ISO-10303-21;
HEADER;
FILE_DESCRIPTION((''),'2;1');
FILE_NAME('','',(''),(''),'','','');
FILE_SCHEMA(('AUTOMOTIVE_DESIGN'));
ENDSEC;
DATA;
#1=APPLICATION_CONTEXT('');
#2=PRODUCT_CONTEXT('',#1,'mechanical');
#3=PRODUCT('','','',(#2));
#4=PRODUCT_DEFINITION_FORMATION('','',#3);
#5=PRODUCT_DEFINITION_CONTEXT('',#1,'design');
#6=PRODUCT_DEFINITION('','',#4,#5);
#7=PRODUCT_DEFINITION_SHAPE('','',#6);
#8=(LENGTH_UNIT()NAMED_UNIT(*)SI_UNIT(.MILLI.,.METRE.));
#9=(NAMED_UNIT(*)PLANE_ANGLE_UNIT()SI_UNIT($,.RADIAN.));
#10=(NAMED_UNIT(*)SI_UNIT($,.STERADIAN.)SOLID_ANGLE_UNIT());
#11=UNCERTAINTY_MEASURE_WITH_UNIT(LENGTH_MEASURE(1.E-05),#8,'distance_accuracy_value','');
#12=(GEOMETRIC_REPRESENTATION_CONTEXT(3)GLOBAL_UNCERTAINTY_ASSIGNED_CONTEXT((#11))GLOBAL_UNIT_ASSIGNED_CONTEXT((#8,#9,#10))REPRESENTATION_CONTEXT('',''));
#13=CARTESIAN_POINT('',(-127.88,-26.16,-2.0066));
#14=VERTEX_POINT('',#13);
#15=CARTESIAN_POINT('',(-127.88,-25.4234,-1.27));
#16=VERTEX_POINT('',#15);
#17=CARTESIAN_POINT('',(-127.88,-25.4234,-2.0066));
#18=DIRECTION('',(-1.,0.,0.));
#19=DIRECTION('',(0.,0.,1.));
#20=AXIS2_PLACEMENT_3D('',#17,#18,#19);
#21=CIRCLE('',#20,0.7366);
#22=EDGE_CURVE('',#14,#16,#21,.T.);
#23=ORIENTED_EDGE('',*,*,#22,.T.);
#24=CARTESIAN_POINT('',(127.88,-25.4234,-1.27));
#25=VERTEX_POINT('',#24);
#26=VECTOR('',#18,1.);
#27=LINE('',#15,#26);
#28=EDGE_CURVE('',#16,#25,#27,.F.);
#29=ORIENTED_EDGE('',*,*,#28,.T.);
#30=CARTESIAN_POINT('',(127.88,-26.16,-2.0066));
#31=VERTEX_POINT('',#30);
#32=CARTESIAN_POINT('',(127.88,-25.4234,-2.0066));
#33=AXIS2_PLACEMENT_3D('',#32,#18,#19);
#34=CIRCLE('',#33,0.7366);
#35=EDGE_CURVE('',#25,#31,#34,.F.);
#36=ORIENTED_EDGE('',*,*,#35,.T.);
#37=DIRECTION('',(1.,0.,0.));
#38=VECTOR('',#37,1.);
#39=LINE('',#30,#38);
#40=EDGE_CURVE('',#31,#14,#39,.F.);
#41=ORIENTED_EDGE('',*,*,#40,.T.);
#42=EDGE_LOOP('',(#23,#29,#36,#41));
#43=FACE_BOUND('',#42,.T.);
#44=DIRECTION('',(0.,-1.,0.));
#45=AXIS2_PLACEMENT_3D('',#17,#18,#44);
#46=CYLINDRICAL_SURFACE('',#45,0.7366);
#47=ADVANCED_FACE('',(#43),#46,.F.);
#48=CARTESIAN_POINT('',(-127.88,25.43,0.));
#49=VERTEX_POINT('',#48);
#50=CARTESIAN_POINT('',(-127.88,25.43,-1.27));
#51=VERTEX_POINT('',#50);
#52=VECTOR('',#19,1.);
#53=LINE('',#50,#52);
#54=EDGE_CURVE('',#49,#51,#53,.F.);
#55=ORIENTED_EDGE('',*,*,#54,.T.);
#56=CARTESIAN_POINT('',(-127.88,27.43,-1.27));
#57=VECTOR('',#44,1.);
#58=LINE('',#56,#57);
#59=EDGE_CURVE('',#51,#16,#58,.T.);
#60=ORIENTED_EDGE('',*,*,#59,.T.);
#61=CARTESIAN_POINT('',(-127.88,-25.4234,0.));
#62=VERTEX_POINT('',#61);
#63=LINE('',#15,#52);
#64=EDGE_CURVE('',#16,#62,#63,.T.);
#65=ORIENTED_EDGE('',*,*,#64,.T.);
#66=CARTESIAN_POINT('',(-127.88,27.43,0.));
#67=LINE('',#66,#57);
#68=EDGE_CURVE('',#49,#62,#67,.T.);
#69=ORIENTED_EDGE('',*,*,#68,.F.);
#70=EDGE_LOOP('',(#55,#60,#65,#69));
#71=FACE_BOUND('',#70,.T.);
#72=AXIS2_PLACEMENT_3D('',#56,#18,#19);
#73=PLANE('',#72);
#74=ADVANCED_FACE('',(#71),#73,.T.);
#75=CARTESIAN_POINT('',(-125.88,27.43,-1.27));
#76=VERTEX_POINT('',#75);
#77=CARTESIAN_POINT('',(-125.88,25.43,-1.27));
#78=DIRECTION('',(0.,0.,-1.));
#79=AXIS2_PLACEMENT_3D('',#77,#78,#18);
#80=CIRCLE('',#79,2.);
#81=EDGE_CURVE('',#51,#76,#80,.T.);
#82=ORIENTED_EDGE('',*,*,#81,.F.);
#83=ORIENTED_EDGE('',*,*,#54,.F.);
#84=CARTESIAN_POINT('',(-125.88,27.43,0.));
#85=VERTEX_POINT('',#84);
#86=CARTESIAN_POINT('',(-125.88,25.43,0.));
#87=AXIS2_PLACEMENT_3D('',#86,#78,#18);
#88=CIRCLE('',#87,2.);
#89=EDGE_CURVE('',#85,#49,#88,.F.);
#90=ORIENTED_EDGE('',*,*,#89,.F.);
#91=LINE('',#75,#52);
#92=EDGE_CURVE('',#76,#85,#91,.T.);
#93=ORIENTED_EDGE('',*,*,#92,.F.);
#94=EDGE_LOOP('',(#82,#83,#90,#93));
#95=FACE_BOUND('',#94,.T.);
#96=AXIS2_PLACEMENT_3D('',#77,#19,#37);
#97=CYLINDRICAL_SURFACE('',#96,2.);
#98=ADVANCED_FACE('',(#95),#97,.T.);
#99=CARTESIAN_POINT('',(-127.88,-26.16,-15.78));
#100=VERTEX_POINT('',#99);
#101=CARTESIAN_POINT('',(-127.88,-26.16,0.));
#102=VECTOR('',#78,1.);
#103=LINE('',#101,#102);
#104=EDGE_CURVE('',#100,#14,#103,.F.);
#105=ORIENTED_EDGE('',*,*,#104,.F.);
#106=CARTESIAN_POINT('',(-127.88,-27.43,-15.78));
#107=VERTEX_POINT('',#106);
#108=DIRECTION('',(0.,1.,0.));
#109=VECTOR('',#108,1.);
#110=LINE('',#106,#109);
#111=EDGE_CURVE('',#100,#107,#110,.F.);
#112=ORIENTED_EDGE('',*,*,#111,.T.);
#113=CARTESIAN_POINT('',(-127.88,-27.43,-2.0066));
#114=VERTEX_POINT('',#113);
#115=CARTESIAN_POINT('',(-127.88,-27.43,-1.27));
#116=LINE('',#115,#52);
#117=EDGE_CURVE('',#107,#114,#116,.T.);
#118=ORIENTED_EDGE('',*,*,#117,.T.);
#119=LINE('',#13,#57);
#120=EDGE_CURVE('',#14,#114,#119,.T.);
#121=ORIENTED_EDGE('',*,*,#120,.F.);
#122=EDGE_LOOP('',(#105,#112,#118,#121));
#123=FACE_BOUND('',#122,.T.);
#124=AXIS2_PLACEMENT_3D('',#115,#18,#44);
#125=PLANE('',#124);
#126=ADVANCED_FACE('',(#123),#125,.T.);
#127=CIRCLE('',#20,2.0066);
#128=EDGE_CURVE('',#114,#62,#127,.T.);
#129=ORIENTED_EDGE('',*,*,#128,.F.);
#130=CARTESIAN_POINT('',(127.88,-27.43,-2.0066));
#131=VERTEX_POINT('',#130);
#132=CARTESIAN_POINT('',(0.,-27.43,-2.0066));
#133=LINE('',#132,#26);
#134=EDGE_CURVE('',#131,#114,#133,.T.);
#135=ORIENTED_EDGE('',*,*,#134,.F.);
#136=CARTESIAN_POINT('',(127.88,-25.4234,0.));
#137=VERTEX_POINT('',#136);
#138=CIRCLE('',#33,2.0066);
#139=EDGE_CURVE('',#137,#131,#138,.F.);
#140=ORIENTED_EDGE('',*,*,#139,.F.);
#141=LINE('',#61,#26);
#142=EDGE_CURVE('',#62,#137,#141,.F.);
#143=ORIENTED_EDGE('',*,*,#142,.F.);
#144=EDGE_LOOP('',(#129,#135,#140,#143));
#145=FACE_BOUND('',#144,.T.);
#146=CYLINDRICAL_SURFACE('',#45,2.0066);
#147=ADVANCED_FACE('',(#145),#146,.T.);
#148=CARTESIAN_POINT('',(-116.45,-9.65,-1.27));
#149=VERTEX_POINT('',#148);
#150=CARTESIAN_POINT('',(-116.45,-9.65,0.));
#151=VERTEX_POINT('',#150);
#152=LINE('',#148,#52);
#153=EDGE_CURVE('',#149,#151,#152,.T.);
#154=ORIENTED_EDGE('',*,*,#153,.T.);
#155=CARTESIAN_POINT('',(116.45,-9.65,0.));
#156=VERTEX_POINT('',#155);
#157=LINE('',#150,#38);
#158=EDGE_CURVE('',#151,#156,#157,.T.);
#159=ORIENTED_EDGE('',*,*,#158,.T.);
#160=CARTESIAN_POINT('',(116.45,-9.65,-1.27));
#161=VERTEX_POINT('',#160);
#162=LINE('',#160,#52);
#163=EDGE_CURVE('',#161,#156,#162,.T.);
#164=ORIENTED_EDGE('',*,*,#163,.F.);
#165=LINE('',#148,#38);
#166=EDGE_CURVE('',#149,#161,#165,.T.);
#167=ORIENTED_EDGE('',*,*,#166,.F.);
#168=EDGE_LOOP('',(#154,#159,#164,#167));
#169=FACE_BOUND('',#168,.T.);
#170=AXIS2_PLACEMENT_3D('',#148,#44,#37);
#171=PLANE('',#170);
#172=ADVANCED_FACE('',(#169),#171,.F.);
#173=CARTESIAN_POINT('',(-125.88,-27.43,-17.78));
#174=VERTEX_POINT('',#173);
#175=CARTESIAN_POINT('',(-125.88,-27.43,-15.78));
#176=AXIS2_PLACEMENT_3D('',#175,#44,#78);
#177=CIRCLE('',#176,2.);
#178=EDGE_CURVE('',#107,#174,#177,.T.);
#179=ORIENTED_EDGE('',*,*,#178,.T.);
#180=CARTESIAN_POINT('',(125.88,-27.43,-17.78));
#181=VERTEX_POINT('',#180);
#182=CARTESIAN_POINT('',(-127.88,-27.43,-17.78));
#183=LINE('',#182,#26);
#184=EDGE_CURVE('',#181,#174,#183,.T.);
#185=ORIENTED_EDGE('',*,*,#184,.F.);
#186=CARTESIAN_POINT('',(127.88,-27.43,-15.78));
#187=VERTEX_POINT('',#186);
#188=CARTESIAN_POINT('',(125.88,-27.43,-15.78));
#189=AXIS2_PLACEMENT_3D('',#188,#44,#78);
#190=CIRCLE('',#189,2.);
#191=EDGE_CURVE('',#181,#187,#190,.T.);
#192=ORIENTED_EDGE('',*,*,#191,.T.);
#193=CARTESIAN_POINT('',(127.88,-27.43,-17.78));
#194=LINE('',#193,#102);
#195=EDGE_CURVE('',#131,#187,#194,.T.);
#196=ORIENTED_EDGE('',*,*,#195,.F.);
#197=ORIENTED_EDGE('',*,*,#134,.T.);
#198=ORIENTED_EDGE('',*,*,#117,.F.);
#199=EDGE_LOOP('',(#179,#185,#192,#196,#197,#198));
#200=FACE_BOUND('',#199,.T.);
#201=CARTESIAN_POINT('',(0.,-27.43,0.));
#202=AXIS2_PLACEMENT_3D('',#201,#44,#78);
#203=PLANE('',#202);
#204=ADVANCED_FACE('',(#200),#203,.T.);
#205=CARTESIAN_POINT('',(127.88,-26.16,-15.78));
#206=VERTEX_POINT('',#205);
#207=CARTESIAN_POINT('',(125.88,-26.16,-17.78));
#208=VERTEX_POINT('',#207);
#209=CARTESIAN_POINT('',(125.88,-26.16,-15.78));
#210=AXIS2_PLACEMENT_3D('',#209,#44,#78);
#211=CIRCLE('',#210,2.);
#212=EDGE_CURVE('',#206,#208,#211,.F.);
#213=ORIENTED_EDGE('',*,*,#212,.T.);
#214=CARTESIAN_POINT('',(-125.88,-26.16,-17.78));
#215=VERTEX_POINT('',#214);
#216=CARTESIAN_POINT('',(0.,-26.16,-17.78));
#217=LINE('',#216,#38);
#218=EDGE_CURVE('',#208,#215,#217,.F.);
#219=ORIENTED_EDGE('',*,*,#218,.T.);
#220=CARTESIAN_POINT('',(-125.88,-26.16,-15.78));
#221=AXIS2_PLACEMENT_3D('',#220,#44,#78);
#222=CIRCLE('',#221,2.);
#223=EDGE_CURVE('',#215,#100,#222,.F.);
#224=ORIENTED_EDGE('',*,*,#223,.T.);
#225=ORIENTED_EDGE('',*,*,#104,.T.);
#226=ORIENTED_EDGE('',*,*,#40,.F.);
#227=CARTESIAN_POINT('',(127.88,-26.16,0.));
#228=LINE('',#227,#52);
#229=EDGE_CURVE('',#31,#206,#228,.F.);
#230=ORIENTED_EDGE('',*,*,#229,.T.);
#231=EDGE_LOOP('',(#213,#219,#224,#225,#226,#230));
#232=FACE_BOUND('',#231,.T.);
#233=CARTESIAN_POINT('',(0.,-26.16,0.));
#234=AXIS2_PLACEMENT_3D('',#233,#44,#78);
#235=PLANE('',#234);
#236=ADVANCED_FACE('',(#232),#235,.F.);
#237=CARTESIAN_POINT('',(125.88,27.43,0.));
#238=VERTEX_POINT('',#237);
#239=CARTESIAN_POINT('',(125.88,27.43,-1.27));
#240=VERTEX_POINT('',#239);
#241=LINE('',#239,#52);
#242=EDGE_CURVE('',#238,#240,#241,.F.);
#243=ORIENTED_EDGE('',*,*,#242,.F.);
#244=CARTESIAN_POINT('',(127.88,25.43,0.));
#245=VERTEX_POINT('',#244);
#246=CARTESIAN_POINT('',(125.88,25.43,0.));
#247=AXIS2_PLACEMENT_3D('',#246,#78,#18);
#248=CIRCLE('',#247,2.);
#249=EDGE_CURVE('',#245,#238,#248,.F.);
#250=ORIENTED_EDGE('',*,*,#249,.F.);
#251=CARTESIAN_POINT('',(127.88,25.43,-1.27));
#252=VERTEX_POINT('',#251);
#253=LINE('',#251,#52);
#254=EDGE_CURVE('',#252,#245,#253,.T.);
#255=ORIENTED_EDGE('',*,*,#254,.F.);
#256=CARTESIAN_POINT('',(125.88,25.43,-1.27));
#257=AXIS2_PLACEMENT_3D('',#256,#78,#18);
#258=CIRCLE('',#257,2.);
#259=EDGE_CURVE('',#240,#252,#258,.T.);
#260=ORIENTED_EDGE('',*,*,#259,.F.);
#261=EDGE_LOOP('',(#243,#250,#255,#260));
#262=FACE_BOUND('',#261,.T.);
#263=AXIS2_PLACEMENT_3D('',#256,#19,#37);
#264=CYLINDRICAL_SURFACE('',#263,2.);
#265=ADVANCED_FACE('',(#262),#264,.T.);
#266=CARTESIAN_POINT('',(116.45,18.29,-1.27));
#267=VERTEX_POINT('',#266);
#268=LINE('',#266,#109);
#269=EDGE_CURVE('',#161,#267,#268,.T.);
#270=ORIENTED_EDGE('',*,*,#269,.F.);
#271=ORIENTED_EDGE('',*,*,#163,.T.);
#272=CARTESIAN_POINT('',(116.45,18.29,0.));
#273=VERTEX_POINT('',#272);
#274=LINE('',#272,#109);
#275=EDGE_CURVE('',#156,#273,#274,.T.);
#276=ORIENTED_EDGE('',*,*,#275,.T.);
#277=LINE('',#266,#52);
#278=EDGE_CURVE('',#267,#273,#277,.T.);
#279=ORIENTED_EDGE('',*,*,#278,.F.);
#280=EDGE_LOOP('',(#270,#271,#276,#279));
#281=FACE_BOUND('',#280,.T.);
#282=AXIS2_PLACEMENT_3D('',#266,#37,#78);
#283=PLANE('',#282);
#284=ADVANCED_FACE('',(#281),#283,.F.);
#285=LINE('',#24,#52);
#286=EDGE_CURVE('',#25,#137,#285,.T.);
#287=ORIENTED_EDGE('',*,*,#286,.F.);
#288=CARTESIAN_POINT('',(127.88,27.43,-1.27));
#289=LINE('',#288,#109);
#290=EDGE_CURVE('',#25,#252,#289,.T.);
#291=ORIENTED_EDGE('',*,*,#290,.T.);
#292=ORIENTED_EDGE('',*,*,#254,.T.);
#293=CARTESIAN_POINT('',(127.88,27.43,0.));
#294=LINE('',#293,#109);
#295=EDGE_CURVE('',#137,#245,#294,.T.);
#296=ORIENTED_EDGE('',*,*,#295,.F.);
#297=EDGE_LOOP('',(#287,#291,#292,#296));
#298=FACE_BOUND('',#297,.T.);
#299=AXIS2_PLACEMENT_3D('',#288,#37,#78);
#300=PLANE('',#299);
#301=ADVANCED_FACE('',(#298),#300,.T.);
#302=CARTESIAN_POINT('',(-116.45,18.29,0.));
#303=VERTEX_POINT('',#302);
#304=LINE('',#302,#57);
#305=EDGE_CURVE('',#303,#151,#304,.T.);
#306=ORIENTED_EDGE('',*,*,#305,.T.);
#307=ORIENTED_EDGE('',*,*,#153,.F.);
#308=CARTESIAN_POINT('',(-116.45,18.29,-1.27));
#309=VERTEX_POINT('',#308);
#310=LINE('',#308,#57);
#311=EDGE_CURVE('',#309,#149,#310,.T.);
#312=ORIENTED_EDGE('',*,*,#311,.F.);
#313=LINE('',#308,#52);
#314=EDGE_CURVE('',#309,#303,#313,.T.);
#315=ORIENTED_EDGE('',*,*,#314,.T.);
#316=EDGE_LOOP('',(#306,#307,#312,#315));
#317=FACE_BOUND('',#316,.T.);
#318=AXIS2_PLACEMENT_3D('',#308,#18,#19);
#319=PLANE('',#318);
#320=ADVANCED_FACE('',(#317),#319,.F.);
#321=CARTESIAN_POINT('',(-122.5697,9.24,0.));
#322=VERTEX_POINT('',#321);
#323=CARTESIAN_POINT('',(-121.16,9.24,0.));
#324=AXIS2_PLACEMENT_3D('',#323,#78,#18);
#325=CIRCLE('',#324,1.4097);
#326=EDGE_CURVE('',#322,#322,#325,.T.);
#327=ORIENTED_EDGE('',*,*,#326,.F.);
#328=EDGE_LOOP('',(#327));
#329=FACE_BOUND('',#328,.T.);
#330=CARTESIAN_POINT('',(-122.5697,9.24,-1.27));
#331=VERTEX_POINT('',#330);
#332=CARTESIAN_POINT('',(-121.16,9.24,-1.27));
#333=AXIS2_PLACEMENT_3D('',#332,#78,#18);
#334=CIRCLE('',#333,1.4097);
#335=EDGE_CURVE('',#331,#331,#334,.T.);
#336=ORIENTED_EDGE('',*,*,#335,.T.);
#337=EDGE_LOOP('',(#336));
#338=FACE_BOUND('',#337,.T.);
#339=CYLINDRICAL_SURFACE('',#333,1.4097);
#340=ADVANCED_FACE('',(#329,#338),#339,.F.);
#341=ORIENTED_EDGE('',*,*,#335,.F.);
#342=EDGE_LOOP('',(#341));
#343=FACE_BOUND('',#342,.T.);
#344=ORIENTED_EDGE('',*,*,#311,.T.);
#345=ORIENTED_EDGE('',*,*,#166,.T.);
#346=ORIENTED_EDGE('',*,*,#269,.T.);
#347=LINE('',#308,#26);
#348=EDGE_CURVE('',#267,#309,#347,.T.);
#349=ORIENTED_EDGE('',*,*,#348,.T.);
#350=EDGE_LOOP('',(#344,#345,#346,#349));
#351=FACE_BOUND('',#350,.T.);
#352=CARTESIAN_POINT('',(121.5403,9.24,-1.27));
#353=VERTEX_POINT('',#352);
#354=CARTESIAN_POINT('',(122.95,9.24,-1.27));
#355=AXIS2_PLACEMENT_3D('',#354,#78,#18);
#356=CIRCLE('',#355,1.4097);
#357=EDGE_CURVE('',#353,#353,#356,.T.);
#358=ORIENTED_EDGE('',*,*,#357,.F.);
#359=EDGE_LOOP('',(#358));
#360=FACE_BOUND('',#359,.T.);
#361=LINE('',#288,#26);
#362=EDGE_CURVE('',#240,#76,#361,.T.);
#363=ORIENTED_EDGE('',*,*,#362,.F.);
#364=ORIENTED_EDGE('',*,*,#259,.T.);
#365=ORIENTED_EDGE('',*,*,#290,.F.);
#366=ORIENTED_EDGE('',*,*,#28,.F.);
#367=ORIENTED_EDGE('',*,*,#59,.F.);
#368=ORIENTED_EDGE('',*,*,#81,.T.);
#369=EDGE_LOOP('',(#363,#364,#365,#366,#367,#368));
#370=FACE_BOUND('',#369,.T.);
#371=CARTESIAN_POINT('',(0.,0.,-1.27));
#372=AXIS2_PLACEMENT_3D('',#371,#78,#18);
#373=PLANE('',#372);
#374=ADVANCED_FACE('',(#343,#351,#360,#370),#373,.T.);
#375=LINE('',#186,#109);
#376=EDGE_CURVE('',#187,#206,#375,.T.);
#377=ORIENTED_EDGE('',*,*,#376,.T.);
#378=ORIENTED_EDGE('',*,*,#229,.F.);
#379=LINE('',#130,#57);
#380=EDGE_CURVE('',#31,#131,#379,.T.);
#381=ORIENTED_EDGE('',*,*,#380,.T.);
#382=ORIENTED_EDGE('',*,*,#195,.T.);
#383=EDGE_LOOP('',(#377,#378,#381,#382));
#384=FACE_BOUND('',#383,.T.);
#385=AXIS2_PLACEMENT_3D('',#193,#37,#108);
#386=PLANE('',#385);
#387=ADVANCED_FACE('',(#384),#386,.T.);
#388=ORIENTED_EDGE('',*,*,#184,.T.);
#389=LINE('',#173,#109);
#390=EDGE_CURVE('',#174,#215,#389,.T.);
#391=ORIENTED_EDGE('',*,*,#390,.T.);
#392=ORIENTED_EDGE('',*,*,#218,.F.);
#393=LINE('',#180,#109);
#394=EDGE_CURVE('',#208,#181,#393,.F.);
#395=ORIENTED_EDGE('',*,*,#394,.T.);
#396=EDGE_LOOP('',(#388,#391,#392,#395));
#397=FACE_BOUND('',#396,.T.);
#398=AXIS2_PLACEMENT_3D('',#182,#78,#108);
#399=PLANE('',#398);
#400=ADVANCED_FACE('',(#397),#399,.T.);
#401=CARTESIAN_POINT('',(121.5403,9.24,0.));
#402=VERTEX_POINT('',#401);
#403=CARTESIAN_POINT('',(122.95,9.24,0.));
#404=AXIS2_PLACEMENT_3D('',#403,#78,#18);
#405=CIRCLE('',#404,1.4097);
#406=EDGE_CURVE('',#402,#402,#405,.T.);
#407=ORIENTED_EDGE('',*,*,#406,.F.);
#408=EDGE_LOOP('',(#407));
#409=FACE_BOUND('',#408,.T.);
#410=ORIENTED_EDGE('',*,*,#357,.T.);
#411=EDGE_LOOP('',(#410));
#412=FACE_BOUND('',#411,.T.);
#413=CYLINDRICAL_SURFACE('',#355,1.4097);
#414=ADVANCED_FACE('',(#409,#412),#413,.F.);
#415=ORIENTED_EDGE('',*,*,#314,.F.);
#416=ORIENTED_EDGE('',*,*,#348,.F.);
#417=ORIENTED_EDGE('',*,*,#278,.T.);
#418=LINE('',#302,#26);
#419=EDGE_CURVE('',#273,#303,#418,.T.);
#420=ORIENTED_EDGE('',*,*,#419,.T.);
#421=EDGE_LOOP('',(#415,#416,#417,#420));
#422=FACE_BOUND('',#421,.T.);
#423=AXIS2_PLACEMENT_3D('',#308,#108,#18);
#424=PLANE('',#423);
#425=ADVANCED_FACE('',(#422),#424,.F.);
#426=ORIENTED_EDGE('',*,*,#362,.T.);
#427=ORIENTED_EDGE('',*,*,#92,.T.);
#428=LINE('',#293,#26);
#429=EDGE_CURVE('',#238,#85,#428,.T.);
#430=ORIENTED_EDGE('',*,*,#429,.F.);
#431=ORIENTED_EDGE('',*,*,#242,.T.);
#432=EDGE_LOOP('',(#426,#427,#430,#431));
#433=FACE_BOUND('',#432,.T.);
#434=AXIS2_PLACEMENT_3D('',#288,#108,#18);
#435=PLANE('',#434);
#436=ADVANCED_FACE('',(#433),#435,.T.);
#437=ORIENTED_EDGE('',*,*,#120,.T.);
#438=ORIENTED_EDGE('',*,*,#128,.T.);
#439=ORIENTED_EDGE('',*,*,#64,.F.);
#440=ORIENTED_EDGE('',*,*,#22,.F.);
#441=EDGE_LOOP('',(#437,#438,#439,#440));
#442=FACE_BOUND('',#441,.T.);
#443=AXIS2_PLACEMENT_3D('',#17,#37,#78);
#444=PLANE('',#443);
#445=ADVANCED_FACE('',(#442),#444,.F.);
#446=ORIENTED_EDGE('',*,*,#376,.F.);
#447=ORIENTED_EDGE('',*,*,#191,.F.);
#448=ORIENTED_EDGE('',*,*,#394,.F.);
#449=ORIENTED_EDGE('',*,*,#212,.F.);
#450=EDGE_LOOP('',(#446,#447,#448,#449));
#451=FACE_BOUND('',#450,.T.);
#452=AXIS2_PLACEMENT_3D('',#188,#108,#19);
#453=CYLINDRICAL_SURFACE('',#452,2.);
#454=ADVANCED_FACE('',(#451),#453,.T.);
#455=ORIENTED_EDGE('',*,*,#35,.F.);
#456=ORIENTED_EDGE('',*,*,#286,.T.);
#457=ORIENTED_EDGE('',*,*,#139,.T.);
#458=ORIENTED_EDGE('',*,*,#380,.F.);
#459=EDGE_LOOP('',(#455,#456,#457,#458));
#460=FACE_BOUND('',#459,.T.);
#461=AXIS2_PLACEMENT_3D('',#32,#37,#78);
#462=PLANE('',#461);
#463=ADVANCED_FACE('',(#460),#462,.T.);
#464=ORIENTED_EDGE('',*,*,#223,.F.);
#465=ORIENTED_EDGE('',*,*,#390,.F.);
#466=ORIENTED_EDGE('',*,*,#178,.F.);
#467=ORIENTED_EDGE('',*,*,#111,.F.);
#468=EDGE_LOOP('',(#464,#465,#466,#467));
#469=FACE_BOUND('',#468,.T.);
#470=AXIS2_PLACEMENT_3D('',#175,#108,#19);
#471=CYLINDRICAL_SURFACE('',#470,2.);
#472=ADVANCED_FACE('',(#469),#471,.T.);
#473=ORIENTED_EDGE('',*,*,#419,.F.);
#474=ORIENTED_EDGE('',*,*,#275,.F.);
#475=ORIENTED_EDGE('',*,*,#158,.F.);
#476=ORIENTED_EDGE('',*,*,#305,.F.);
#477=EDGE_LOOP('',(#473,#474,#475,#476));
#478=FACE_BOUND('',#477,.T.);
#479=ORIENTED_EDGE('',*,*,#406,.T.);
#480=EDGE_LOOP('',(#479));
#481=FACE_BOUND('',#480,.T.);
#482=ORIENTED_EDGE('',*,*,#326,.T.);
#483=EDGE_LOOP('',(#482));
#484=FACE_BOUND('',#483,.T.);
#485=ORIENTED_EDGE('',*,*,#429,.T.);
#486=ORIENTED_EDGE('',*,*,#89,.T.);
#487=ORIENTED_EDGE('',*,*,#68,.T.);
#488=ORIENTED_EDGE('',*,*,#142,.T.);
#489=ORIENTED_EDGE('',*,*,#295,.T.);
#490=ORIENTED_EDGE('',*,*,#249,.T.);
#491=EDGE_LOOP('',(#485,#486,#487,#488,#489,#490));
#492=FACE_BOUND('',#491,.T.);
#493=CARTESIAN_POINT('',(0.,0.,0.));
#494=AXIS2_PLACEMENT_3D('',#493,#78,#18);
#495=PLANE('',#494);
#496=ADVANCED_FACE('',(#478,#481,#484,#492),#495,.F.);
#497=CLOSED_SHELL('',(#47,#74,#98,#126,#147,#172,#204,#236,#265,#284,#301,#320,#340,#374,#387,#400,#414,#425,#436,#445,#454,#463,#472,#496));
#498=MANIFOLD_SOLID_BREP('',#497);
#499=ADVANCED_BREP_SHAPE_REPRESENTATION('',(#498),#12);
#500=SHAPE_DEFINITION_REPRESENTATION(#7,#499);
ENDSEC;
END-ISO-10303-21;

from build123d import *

# Parameters (mm, degrees)
SKETCH2_W                    = 255.76
SKETCH2_H                    = 54.86
SKETCH2_W_2                  = 232.9
SKETCH2_H_2                  = 27.94
BASE_FLANGE1_DEPTH           = 1.27
EDGE_FLANGE1_STRIP_W         = 6.5532
EDGE_FLANGE1_STRIP_H         = 1.27
EDGE_FLANGE1_STRIP_CUT_DEPTH = 255.76
EDGE_FLANGE1_DEPTH           = 255.76
F_34_0_111_DIAMETER_HOLE1_D  = 2.8194
FILLET1_R                    = 2


# Sheet-metal steps are written as plain solids
with BuildPart() as part:
    # Sketch2 → Base-Flange1 (new body)
    with BuildSketch(Plane.XY):
        Rectangle(SKETCH2_W, SKETCH2_H)
        with Locations((0, 4.32)):
            Rectangle(SKETCH2_W_2, SKETCH2_H_2, mode=Mode.SUBTRACT)
    extrude(amount=-BASE_FLANGE1_DEPTH)

    # Edge-Flange1 strip (across the edge) → Edge-Flange1 strip cut (cut)
    with BuildSketch(Plane(origin=(127.88, -27.43, -1.27), x_dir=(0, 1, 0), z_dir=(-1, 0, 0))):
        with Locations((-1.27, -0.635)):
            Rectangle(EDGE_FLANGE1_STRIP_W, EDGE_FLANGE1_STRIP_H)
    extrude(amount=EDGE_FLANGE1_STRIP_CUT_DEPTH, mode=Mode.SUBTRACT)

    # Edge-Flange1 section (across the edge) → Edge-Flange1 (add)
    with BuildSketch(Plane(origin=(127.88, -27.43, -1.27), x_dir=(0, 1, 0), z_dir=(-1, 0, 0))):
        with BuildLine():
            Line((0, 0.7366), (0, 16.51))
            Line((0, 16.51), (1.27, 16.51))
            Line((1.27, 16.51), (1.27, 0.7366))
            ThreePointArc((1.27, 0.7366), (1.485745145, 0.215745145), (2.0066, 0))
            Line((2.0066, 0), (2.0066, -1.27))
            ThreePointArc((2.0066, -1.27), (0.587719533, -0.682280467), (0, 0.7366))
        make_face()
    extrude(amount=EDGE_FLANGE1_DEPTH)

    # #34 (0.111) Diameter Hole1 (through all)
    with Locations(Plane(origin=(0, 0, -1.27), x_dir=(-1, 0, 0), z_dir=(0, 0, -1))):
        with Locations((-122.95, 9.24), (121.16, 9.24)):
            Hole(F_34_0_111_DIAMETER_HOLE1_D / 2)

    # Fillet1
    fillet1_edges = [part.edges().sort_by_distance(p)[0] for p in [
        (127.88, -26.795, -17.78),
        (-127.88, -26.795, -17.78),
        (-127.88, 27.43, -0.635),
        (127.88, 27.43, -0.635),
    ]]
    fillet(fillet1_edges, radius=FILLET1_R)


solid = part.part
